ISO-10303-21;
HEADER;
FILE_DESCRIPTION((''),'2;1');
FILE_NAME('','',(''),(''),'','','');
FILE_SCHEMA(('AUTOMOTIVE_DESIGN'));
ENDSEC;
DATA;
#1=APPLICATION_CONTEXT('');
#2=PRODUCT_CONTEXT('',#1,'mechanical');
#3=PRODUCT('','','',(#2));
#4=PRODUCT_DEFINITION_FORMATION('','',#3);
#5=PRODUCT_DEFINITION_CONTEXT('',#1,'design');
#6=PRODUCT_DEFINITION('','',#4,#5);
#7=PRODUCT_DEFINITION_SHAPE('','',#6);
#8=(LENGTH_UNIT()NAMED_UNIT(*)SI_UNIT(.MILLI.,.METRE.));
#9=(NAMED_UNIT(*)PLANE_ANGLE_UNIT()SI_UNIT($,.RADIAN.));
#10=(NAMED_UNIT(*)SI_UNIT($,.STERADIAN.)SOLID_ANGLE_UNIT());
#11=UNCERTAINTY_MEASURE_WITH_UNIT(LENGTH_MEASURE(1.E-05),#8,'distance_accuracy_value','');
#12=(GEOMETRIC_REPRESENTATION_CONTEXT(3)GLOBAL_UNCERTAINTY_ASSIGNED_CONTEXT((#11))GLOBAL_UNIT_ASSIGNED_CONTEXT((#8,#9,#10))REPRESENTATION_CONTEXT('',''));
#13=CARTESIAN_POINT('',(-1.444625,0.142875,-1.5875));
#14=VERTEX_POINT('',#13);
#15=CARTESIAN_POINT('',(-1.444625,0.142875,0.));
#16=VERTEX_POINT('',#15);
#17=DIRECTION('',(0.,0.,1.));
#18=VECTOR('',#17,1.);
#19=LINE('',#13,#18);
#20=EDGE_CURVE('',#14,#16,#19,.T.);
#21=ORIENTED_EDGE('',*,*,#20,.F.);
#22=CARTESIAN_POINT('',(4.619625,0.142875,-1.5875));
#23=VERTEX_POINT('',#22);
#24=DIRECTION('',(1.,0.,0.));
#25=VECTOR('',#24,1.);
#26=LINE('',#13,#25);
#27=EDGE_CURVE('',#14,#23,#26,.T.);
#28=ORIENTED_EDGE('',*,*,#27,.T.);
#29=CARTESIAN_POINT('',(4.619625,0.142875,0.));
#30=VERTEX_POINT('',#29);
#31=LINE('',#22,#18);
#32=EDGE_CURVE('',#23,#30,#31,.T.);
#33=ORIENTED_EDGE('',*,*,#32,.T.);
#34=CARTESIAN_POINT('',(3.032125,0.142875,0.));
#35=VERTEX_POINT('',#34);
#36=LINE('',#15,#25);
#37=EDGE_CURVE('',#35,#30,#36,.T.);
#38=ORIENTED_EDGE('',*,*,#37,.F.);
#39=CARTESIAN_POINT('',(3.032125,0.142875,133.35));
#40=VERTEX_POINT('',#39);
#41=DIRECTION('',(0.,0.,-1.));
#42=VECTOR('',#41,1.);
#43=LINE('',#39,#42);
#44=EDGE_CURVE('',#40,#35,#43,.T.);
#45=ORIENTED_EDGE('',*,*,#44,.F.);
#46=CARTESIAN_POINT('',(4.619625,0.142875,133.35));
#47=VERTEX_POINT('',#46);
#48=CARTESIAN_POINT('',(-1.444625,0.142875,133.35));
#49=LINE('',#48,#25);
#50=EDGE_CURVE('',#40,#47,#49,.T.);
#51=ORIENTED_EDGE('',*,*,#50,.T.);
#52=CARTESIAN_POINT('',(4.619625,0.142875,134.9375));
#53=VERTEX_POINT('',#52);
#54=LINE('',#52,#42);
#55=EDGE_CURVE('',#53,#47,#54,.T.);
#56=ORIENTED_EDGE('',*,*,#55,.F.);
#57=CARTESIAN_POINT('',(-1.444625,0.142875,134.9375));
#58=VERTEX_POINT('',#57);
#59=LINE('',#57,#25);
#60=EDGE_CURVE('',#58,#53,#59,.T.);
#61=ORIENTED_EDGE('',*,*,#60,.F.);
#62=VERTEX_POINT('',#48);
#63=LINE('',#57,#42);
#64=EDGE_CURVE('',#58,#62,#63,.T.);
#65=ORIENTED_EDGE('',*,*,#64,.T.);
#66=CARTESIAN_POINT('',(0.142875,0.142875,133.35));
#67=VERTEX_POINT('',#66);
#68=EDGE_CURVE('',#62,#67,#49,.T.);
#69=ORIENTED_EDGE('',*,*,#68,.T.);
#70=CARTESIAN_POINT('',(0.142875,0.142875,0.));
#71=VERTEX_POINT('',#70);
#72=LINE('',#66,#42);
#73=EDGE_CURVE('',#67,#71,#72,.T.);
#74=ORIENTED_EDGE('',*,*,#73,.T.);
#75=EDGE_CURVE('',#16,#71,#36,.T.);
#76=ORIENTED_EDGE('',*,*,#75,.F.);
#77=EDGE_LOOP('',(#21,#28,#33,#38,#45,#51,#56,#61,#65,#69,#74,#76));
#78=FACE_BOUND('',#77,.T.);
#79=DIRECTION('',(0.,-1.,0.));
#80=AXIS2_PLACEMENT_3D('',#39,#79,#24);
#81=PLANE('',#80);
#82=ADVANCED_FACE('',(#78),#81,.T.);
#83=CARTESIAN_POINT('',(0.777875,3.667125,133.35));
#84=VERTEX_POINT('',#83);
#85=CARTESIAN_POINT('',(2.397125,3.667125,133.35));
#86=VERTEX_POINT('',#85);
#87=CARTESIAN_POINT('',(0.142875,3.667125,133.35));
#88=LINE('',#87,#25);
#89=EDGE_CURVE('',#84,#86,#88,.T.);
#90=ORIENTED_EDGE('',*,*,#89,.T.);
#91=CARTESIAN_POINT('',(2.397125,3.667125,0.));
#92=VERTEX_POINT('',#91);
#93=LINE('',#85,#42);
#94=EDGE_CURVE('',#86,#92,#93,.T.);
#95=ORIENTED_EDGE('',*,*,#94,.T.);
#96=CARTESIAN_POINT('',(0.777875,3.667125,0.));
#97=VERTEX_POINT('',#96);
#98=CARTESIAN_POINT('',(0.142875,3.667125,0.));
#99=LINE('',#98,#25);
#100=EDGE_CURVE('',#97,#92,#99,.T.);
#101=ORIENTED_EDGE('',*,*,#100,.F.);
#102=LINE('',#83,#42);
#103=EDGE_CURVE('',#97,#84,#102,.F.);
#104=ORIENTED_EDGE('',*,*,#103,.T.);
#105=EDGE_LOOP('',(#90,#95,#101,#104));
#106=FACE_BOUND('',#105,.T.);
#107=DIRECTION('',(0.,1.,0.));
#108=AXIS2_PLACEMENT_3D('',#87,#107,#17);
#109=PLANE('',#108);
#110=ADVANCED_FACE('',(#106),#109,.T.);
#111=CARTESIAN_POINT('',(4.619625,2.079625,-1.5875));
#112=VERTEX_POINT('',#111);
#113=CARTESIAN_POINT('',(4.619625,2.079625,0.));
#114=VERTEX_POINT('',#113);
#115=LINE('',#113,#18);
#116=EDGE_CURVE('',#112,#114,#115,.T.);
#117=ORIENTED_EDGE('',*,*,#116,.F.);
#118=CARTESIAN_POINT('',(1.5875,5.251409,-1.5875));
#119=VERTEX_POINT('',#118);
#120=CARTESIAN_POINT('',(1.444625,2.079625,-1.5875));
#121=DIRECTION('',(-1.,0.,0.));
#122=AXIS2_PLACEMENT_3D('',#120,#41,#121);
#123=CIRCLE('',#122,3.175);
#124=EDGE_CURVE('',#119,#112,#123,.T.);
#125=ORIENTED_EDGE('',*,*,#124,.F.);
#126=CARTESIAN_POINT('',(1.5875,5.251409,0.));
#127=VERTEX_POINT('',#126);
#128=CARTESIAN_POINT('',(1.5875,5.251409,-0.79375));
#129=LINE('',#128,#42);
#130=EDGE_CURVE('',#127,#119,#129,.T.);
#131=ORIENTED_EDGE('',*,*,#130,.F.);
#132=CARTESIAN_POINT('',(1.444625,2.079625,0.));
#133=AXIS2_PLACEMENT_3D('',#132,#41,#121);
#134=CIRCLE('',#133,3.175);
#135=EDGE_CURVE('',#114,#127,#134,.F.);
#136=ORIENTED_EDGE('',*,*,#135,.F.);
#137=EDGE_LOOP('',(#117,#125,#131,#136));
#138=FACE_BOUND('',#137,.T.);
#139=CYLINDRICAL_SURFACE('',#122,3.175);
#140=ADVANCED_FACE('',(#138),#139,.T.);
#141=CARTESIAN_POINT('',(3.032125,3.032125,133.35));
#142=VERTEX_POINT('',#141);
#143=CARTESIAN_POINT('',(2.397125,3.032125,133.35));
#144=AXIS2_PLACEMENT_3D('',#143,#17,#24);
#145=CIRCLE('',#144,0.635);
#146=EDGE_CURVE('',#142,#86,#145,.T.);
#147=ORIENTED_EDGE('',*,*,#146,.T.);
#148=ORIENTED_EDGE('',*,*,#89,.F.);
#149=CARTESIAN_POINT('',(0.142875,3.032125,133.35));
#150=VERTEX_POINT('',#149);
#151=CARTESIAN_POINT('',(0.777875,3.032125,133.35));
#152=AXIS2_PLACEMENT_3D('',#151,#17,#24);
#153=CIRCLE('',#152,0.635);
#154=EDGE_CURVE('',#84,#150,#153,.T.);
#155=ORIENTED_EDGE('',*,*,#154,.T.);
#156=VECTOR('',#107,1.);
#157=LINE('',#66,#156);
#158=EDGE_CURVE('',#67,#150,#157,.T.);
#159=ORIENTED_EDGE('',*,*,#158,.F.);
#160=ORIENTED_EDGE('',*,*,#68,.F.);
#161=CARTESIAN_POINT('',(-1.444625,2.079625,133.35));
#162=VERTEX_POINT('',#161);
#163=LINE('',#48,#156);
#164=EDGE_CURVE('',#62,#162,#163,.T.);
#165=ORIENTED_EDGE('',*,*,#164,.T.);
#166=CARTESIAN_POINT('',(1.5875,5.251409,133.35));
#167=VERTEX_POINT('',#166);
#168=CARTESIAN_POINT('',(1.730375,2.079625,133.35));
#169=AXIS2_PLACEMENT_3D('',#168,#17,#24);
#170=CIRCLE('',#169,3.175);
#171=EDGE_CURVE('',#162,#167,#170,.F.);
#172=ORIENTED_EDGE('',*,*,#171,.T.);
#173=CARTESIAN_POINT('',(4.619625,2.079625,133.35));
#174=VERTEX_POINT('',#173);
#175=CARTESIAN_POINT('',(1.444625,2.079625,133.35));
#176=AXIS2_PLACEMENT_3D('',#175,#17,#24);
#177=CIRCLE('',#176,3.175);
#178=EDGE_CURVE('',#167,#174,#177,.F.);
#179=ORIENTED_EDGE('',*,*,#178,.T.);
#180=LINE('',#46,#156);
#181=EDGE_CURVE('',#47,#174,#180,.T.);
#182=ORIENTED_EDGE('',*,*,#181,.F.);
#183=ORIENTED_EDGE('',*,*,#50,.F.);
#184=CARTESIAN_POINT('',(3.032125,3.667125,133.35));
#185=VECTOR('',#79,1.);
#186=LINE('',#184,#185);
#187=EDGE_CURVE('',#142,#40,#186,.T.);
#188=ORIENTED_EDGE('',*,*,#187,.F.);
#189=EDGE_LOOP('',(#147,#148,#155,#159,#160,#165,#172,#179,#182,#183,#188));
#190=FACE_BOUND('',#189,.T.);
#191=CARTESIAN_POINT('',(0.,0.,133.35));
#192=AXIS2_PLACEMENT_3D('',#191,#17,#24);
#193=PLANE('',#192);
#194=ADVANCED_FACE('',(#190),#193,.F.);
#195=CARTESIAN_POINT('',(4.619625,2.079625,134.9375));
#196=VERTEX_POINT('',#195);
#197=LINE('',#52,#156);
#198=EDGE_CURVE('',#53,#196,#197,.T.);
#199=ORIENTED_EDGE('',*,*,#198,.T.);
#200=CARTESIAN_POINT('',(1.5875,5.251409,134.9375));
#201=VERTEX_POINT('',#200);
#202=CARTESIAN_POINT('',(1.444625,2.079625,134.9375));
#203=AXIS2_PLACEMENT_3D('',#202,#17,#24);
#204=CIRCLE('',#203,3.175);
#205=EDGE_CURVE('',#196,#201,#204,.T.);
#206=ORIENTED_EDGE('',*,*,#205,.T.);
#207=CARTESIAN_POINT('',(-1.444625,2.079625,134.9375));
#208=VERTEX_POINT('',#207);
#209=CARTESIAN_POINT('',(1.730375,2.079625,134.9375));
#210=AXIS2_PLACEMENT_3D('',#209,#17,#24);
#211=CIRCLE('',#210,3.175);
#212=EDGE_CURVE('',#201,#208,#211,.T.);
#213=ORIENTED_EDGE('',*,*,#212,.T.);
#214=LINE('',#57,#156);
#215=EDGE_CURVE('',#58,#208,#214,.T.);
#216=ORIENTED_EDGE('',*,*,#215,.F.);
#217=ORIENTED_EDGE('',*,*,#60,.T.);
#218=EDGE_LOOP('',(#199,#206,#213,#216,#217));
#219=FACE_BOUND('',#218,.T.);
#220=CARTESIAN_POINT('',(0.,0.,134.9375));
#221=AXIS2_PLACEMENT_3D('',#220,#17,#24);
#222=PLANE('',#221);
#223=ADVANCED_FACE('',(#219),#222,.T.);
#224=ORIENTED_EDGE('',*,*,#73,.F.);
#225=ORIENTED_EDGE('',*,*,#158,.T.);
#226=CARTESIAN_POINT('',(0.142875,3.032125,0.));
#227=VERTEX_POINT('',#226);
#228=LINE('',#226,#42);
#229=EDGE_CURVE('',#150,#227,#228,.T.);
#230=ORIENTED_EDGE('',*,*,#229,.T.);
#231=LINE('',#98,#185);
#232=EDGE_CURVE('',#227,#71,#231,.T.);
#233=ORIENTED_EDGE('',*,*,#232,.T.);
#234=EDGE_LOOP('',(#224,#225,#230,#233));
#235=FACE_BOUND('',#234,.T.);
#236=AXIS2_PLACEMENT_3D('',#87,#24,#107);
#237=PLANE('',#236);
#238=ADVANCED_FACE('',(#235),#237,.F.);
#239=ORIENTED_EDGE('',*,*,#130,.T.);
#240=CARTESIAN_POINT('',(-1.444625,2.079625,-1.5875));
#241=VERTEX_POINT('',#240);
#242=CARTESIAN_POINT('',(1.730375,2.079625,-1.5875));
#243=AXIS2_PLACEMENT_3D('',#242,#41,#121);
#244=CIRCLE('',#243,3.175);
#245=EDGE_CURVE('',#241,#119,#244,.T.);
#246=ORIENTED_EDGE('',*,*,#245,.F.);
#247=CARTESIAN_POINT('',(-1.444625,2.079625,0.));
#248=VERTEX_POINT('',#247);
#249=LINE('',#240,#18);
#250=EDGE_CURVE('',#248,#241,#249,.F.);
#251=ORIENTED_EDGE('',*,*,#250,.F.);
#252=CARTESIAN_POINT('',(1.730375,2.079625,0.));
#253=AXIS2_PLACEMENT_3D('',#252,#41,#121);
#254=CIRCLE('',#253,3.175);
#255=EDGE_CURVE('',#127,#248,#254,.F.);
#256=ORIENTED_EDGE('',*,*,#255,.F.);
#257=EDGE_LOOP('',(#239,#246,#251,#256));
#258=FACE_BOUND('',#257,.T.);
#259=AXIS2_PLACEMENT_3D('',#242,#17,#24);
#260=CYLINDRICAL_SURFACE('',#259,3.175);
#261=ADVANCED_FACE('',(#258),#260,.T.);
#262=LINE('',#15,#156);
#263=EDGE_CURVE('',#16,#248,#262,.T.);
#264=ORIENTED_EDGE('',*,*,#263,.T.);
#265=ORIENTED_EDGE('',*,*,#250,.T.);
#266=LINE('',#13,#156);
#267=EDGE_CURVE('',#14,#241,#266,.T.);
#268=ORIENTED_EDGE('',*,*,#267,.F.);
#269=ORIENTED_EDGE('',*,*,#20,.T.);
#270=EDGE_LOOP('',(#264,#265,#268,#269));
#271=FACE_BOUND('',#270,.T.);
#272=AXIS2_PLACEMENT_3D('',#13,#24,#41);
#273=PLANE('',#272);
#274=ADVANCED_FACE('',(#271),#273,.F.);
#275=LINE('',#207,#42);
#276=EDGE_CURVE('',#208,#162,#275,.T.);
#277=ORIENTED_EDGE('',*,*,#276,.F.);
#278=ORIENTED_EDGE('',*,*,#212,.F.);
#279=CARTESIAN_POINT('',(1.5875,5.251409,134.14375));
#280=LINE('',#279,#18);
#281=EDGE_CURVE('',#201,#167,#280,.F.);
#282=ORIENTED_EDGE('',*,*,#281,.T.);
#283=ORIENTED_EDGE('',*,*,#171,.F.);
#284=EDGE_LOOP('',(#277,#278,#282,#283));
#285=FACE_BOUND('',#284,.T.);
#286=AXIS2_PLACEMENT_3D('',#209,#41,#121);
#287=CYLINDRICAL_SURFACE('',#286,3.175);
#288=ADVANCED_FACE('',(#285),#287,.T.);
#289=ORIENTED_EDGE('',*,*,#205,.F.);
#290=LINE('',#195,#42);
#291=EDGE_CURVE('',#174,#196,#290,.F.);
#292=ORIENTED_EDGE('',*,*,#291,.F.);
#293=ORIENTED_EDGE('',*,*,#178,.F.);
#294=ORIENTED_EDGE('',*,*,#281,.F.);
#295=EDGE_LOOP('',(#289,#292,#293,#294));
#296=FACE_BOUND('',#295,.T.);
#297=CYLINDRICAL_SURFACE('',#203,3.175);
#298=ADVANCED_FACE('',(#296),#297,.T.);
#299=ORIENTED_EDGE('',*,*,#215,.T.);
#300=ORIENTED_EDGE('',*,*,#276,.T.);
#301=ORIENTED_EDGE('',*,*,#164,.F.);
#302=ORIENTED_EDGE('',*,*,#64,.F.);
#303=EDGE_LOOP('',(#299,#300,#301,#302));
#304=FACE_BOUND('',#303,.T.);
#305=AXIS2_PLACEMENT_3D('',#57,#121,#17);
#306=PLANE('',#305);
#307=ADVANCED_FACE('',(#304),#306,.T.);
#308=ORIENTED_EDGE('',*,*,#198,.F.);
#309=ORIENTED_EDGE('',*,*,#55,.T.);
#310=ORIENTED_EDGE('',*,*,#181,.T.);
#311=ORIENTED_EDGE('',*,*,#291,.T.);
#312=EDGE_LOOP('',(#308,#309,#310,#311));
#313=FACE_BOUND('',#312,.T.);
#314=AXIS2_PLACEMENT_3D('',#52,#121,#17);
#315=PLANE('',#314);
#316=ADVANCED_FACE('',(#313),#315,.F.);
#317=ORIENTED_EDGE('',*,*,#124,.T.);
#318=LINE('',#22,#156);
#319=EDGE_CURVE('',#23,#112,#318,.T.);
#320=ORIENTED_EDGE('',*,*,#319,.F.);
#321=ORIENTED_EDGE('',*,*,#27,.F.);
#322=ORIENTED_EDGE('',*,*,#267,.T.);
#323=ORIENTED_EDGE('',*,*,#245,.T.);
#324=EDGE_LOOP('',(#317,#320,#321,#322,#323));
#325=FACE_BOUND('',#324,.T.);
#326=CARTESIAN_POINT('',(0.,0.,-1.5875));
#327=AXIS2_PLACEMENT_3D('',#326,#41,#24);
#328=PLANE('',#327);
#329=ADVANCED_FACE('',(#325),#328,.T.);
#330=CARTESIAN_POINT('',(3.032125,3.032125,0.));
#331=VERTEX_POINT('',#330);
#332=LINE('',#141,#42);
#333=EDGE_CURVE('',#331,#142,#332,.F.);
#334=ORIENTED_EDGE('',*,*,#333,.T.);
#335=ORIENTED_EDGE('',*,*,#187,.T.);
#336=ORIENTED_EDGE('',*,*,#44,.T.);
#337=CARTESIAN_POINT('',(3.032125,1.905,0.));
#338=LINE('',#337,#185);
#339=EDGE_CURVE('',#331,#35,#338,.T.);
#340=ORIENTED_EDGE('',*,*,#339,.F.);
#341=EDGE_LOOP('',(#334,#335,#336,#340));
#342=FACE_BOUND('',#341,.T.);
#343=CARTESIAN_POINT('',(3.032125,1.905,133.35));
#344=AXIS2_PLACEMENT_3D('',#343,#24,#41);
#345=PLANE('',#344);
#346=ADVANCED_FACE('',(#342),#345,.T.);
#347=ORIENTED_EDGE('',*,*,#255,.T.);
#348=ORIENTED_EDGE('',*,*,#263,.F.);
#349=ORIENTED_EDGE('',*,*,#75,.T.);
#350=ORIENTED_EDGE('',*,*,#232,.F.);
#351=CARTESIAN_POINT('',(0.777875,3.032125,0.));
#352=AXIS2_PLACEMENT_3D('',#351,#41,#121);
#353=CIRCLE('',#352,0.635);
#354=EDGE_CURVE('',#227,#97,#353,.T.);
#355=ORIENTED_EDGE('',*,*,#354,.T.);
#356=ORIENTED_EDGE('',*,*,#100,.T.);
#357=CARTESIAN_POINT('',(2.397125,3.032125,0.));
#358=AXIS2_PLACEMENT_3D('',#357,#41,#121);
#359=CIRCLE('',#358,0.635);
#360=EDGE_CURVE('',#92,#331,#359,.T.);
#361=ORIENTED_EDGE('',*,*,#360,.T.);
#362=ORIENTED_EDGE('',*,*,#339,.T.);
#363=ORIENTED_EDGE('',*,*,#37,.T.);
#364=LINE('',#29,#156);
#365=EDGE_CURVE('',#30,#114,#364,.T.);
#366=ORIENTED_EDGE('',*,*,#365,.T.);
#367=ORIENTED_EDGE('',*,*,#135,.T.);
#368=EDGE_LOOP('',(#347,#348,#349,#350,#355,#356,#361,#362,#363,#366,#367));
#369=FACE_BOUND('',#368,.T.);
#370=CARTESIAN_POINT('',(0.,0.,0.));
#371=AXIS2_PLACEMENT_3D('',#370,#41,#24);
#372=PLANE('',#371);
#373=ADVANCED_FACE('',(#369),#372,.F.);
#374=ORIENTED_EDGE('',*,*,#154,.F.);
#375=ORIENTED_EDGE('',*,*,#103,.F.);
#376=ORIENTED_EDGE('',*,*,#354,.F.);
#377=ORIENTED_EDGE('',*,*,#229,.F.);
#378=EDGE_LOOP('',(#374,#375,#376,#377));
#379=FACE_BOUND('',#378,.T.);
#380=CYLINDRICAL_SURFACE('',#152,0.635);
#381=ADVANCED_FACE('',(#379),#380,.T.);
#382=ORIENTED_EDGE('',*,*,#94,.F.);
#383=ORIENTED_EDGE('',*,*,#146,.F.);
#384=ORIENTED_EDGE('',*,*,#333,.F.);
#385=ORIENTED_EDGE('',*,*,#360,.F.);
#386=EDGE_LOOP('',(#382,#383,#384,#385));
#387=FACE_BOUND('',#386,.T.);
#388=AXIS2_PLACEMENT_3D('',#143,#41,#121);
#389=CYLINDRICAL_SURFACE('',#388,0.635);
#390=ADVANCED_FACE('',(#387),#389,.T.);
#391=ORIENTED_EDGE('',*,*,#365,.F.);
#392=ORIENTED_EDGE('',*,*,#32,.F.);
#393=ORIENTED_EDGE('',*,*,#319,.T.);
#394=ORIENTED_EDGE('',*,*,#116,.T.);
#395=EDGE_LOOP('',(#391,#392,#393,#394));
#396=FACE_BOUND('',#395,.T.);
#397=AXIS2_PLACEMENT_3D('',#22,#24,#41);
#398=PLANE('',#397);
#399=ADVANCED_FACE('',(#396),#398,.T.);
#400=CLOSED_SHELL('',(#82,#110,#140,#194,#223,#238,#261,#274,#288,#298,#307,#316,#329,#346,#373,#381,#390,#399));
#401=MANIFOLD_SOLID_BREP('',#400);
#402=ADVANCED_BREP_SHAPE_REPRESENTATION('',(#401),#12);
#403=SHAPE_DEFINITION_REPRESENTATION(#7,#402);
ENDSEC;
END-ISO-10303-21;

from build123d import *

# Parameters (mm, degrees)
BOSS_EXTRUDE1_DEPTH  = 133.35
SKETCH2_W            = 6.06425
SKETCH2_H            = 5.11175
BOSS_EXTRUDE2_DEPTH  = 1.5875
FILLET1_R            = 3.175
FILLET1_OF_MIRROR1_R = 3.175
FILLET2_R            = 0.635


with BuildPart() as part:
    # Sketch1 → Boss-Extrude1 (new body)
    with BuildSketch(Plane.XY):
        Polygon((0.142875, 3.667125), (3.032125, 3.667125), (3.032125, 1.905), (3.032125, 0.142875), (0.142875, 0.142875), (0.142875, 1.905), align=None)
    extrude(amount=BOSS_EXTRUDE1_DEPTH)

    # Sketch2 → Boss-Extrude2 (add)
    with BuildSketch(Plane.XY.offset(133.35)):
        with Locations((1.5875, 2.69875)):
            Rectangle(SKETCH2_W, SKETCH2_H)
    boss_extrude2 = extrude(amount=BOSS_EXTRUDE2_DEPTH)

    # Fillet1
    # the kernel refuses this fillet: 3.175 mm, written as the material it takes off along each edge
    with BuildSketch(Plane(origin=(-1.444625, 5.254625, 125.4125), x_dir=(0, -1, 0), z_dir=(0, 0, 1))) as fillet1_piece_1:
        with BuildLine():
            CenterArc((FILLET1_R, FILLET1_R), FILLET1_R, 180, 90)
            Line((0, FILLET1_R), (0, 0))
            Line((0, 0), (FILLET1_R, 0))
        make_face()
    extrude(amount=17.4625, mode=Mode.SUBTRACT)
    with BuildSketch(Plane(origin=(4.619625, 5.254625, 125.4125), x_dir=(0, -1, 0), z_dir=(0, 0, 1))) as fillet1_piece_2:
        with BuildLine():
            CenterArc((FILLET1_R, -FILLET1_R), FILLET1_R, 90, 90)
            Line((0, -FILLET1_R), (0, 0))
            Line((0, 0), (FILLET1_R, 0))
        make_face()
    extrude(amount=17.4625, mode=Mode.SUBTRACT)

    # Mirror1: Boss-Extrude2 across plane
    add(boss_extrude2.mirror(Plane.XY.offset(66.675)))

    # Fillet1 of Mirror1
    # the kernel refuses this fillet: 3.175 mm, written as the material it takes off along each edge
    with BuildSketch(Plane(origin=(-1.444625, 5.254625, 7.9375), x_dir=(0, -1, 0), z_dir=(0, 0, -1))) as fillet1_of_mirror1_piece_1:
        with BuildLine():
            CenterArc((FILLET1_OF_MIRROR1_R, -FILLET1_OF_MIRROR1_R), FILLET1_OF_MIRROR1_R, 90, 90)
            Line((0, -FILLET1_OF_MIRROR1_R), (0, 0))
            Line((0, 0), (FILLET1_OF_MIRROR1_R, 0))
        make_face()
    extrude(amount=17.4625, mode=Mode.SUBTRACT)
    with BuildSketch(Plane(origin=(4.619625, 5.254625, 7.9375), x_dir=(0, -1, 0), z_dir=(0, 0, -1))) as fillet1_of_mirror1_piece_2:
        with BuildLine():
            CenterArc((FILLET1_OF_MIRROR1_R, FILLET1_OF_MIRROR1_R), FILLET1_OF_MIRROR1_R, 180, 90)
            Line((0, FILLET1_OF_MIRROR1_R), (0, 0))
            Line((0, 0), (FILLET1_OF_MIRROR1_R, 0))
        make_face()
    extrude(amount=17.4625, mode=Mode.SUBTRACT)

    # Fillet2
    fillet2_edges = [part.edges().sort_by_distance(p)[0] for p in [
        (3.032125, 3.667125, 66.675),
        (0.142875, 3.667125, 66.675),
    ]]
    fillet(fillet2_edges, radius=FILLET2_R)


solid = part.part
